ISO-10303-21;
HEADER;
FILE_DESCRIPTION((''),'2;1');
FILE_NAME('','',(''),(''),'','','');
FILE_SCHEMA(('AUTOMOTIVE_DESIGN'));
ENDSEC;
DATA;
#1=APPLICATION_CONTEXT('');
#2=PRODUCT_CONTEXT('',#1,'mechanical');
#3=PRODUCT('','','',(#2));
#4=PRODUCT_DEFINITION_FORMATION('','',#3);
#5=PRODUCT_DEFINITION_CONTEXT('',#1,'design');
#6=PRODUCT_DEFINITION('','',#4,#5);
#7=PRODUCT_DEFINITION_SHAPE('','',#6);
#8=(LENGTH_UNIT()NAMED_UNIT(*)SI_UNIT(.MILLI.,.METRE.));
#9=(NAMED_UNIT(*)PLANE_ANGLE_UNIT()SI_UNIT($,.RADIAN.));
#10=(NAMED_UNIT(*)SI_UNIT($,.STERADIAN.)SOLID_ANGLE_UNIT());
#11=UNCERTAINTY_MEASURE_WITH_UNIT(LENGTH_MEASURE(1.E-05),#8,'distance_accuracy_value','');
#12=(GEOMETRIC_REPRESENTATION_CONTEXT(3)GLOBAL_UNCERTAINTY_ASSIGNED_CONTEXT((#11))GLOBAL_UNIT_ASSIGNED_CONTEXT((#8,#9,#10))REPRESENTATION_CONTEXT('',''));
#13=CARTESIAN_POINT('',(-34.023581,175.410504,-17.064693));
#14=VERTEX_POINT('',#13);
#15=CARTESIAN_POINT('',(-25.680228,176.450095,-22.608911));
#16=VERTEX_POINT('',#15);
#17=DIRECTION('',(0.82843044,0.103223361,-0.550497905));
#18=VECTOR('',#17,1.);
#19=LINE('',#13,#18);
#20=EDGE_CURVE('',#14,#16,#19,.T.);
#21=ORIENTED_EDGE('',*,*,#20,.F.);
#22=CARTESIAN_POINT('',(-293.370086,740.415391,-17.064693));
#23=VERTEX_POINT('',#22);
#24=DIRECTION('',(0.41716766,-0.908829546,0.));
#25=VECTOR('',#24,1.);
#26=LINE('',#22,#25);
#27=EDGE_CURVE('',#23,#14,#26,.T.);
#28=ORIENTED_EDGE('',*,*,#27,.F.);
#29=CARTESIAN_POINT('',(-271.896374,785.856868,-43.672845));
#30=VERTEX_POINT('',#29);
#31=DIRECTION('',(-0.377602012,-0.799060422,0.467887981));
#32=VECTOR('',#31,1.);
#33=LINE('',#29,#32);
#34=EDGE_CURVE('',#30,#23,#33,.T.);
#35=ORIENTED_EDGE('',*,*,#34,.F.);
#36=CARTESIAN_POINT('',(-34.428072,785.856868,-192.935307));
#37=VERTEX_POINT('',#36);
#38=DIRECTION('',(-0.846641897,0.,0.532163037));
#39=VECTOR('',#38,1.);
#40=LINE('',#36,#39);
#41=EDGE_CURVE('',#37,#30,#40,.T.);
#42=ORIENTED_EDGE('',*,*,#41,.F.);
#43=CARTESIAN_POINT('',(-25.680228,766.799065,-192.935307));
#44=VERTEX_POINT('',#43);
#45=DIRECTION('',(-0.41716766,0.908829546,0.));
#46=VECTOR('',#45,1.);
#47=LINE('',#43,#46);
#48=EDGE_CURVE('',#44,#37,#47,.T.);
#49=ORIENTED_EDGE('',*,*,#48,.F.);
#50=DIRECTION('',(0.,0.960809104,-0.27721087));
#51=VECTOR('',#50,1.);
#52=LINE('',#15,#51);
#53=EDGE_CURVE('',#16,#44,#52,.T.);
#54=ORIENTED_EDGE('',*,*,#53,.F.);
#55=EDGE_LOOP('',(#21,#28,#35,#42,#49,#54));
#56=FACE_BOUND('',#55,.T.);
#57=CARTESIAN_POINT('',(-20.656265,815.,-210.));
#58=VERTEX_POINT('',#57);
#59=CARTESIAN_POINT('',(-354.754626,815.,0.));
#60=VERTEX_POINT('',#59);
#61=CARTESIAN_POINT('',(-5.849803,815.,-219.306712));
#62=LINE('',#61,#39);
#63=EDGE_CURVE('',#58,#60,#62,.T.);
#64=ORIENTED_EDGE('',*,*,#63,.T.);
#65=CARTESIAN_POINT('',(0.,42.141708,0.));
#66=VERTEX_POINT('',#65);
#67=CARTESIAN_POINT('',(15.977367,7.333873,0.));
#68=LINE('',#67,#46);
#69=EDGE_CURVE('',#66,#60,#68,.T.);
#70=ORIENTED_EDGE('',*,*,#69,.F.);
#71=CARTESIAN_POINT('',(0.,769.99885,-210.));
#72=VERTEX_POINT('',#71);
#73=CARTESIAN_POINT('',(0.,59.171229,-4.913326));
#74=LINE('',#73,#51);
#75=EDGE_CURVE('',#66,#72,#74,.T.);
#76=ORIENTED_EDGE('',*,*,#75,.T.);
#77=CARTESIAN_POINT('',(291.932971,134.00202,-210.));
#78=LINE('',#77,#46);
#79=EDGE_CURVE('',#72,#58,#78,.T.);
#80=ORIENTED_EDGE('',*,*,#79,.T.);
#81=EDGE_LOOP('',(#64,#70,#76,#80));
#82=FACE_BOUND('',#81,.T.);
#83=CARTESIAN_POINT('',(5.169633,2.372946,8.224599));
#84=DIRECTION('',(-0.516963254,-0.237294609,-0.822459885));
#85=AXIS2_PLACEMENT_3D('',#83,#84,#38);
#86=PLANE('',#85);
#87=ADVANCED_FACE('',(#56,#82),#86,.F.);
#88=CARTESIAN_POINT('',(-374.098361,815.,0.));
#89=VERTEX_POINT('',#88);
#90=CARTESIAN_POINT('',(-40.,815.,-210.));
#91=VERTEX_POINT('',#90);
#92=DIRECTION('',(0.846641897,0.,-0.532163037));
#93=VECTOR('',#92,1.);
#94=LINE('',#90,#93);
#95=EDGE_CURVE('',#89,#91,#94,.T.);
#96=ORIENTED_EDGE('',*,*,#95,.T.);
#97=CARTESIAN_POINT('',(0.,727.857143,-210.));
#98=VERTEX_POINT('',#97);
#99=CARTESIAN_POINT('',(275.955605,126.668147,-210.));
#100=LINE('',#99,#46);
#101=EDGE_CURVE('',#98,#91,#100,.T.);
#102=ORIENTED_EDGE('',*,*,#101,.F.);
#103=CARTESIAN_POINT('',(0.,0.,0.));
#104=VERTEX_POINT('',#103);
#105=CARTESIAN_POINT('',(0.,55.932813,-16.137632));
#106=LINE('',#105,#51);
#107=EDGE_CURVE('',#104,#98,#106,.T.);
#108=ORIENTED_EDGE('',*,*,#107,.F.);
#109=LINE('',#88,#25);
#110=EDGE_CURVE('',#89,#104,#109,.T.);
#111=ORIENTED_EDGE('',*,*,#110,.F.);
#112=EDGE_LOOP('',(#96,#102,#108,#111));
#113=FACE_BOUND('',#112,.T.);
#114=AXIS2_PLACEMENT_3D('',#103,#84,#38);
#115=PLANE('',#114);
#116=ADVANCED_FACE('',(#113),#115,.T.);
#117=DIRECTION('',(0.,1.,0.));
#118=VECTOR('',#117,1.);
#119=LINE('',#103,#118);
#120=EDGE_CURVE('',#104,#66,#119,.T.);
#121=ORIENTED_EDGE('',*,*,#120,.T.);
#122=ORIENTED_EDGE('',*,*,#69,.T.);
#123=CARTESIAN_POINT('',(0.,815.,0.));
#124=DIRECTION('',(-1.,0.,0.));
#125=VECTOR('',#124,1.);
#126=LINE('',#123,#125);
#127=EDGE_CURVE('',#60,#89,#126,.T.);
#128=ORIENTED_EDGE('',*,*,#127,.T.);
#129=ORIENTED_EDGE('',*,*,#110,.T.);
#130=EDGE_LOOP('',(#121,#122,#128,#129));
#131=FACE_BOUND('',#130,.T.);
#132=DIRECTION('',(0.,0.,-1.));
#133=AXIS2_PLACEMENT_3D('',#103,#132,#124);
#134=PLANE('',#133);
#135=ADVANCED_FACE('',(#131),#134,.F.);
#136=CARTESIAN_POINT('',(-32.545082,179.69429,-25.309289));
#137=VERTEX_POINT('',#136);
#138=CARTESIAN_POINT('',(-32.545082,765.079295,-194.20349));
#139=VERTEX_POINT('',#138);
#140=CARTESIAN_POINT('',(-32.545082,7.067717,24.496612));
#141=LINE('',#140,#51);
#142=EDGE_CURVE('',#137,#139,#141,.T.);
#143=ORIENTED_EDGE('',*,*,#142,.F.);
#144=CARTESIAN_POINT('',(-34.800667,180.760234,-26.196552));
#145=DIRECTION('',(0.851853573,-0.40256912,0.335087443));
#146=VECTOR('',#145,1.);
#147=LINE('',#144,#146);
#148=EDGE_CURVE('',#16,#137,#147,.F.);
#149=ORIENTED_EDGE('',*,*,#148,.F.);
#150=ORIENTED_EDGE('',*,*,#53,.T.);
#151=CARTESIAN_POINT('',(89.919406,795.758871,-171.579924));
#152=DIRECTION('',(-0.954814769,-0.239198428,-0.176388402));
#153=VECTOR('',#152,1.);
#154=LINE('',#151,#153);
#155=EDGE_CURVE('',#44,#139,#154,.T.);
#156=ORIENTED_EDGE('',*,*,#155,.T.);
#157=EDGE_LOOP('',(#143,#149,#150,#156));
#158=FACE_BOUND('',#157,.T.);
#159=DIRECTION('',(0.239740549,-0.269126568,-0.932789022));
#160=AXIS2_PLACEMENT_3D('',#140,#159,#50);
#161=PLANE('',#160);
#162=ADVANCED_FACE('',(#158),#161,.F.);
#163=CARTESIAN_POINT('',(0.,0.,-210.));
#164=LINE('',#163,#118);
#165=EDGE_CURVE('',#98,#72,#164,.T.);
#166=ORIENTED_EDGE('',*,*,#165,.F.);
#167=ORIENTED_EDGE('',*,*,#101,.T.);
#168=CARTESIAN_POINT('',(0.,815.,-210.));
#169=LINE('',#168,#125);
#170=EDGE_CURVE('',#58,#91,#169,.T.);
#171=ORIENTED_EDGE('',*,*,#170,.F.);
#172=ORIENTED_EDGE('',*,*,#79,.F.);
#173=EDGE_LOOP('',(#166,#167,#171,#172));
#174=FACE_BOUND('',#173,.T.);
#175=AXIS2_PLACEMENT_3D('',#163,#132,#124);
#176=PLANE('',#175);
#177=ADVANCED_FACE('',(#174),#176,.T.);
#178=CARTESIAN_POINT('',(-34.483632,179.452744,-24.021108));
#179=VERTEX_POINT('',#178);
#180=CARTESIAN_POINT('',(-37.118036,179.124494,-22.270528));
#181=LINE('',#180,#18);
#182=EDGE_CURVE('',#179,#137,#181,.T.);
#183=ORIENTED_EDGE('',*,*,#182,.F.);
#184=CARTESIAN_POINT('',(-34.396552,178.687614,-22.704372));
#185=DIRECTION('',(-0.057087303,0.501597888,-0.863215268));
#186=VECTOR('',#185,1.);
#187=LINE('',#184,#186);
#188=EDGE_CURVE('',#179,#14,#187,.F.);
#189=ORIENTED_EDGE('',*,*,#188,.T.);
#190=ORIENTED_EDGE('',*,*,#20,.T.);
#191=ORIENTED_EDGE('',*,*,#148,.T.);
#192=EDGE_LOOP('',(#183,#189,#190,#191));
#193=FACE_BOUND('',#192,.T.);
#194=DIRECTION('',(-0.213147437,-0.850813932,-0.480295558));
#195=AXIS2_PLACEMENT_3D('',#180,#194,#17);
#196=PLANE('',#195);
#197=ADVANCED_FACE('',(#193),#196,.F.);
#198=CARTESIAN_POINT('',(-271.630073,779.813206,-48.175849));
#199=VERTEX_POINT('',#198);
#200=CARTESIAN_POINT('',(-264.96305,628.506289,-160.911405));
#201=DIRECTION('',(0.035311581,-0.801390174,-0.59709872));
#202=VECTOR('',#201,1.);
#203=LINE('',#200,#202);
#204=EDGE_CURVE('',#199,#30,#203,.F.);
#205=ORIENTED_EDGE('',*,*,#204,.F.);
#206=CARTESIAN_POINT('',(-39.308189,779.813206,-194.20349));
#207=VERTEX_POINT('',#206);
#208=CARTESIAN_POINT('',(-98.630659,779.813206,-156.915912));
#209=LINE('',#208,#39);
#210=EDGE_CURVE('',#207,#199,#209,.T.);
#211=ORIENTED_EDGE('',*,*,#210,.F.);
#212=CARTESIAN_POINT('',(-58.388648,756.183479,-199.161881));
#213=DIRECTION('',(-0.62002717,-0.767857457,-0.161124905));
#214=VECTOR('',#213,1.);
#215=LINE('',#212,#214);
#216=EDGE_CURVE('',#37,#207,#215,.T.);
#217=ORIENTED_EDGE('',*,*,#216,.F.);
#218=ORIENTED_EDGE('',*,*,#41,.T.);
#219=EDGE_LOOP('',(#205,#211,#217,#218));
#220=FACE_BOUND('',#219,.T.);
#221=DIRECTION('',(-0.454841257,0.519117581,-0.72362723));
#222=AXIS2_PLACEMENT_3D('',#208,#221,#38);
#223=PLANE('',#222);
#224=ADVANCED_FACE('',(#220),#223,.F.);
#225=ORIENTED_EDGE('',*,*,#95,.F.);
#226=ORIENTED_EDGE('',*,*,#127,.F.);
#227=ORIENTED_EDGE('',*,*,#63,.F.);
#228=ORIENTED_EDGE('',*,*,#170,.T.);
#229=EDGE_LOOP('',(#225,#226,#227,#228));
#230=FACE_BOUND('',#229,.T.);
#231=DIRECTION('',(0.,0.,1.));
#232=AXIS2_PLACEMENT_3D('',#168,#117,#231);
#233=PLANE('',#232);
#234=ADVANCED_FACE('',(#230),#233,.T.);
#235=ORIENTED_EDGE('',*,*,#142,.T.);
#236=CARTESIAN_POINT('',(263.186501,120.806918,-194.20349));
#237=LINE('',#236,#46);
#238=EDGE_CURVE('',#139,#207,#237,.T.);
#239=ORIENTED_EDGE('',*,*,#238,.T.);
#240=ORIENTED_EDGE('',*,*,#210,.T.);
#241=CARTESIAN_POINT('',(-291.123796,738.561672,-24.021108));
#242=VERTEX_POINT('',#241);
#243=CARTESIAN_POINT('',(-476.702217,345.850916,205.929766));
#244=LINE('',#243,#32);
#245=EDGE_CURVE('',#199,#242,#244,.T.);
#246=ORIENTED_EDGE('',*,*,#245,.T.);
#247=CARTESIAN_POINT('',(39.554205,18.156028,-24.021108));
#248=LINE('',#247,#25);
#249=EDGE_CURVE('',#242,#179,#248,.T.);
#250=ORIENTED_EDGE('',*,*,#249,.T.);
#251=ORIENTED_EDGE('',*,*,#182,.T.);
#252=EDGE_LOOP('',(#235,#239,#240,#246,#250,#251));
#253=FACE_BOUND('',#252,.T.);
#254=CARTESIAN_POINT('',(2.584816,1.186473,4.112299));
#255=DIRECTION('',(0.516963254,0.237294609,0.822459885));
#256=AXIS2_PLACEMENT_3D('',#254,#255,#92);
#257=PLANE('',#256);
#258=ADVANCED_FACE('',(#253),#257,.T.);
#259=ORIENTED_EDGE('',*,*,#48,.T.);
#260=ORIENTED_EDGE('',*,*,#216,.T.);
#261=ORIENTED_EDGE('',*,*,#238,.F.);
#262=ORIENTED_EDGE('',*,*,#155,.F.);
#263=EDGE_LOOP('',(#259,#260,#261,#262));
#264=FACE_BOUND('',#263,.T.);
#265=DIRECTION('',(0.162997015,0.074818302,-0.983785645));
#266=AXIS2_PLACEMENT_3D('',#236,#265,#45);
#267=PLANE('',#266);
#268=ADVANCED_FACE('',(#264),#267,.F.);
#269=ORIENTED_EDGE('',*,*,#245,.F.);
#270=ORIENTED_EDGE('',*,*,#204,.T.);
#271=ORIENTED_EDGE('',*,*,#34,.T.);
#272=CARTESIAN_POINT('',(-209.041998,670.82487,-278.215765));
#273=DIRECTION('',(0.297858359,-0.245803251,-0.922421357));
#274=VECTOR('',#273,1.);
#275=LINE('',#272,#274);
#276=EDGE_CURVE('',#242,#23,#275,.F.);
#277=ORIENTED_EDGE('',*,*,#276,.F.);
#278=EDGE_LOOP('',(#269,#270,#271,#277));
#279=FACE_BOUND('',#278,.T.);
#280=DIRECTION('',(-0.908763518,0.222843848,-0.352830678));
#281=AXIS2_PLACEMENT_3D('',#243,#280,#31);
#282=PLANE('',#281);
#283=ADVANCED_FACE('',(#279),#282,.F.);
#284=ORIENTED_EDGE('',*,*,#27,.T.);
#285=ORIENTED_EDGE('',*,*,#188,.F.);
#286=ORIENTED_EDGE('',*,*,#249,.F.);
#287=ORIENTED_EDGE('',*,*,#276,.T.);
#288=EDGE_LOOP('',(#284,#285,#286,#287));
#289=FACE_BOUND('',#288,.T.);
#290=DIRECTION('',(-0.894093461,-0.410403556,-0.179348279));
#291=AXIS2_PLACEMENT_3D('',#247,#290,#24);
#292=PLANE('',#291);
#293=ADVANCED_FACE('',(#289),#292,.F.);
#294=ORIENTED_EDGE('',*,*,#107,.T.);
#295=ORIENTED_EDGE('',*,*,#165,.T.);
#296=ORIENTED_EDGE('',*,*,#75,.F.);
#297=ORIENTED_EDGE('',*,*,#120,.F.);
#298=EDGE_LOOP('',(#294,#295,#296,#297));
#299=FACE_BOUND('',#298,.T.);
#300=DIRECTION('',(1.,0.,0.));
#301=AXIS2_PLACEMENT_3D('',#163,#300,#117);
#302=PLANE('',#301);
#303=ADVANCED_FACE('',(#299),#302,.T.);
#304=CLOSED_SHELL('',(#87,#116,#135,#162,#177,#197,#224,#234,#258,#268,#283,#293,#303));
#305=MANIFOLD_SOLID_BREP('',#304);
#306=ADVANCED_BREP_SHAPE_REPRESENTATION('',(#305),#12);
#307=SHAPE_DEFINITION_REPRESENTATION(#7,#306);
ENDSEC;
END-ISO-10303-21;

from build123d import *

# Parameters (mm, degrees)
BOSS_EXTRU_1_DEPTH      = 210
ENL_V_MAT_EXTRU_4_DEPTH = 922.018231875
ENL_V_MAT_EXTRU_5_DEPTH = 922.018231875
ENL_V_MAT_EXTRU_6_DEPTH = 923.94578116
ENL_V_MAT_EXTRU_7_DEPTH = 5
CHANFREIN1_SIZE         = 5


with BuildPart() as part:
    # Esquisse1 → Boss.-Extru.1 (new body)
    with BuildSketch(Plane.XY):
        Polygon((0, 0), (0, 815), (-374.098360656, 815), align=None)
    extrude(amount=-BOSS_EXTRU_1_DEPTH)

    # Esquisse4 → Enlèv. mat.-Extru.4 (cut, through all)
    with BuildSketch(Plane(origin=(0, 815, 0), x_dir=(1, 0, 0), z_dir=(0, 1, 0))):
        Polygon((-40, 210), (-374.098360656, 0), (-374.098360656, 210), align=None)
    extrude(amount=-ENL_V_MAT_EXTRU_4_DEPTH, mode=Mode.SUBTRACT)

    # Esquisse5 → Enlèv. mat.-Extru.5 (cut, through all)
    with BuildSketch(Plane(origin=(0, 0, 0), x_dir=(-0.8560075896570557, 0.14330783348955523, 0.49670300110835625), z_dir=(-0.5169632544480486, -0.23729460859910434, -0.8224598849064191))):
        Polygon((437.026920294, 783.059419447), (0, 0), (-104.307630233, 58.214282686), (12.488254061, 841.273702133), (46.728557648, 841.273702133), align=None)
    extrude(amount=ENL_V_MAT_EXTRU_5_DEPTH, mode=Mode.SUBTRACT)

    # Esquisse6 → Enlèv. mat.-Extru.6 (cut, through all)
    with BuildSketch(Plane(origin=(5.169632544, 2.372946086, 8.224598849), x_dir=(-0.8560075896570557, 0.14330783348955523, 0.49670300110835625), z_dir=(-0.5169632544480486, -0.23729460859910434, -0.8224598849064191))):
        Polygon((437.026920294, 783.059419447), (46.728557648, 841.273702133), (12.488254061, 841.273702133), (0, 757.546051675), (0, 0), align=None)
    extrude(amount=-ENL_V_MAT_EXTRU_6_DEPTH, mode=Mode.SUBTRACT)

    # Esquisse7 → Enlèv. mat.-Extru.7 (cut)
    with BuildSketch(Plane(origin=(5.169632544, 2.372946086, 8.224598849), x_dir=(0.8560075896570555, -0.14330783348955536, -0.4967030011083565), z_dir=(0.5169632544480489, 0.23729460859910445, 0.8224598849064189))):
        Polygon((-45.786058342, 173.266527892), (-36.039236809, 175.802293869), (-36.039236809, 790.231286712), (-46.25858999, 808.542197087), (-323.672371858, 767.165020382), (-348.758261389, 716.128366398), align=None)
    extrude(amount=-ENL_V_MAT_EXTRU_7_DEPTH, mode=Mode.SUBTRACT)

    # Chanfrein1
    chanfrein1_edges = [part.edges().sort_by_distance(p)[0] for p in [
        (-32.436720565, 174.743826797, -23.949101615),
        (-166.281649801, 456.726474452, -21.176992916),
        (-285.218046516, 761.94965633, -34.481068848),
        (-155.747039223, 784.670394973, -122.416375357),
        (-32.638965904, 775.141493599, -197.047605933),
        (-28.265043962, 470.438107301, -111.884408124),
    ]]
    chamfer(chanfrein1_edges, length=CHANFREIN1_SIZE - 0.0001)  # a hair under: the kernel refuses the full size


solid = part.part
